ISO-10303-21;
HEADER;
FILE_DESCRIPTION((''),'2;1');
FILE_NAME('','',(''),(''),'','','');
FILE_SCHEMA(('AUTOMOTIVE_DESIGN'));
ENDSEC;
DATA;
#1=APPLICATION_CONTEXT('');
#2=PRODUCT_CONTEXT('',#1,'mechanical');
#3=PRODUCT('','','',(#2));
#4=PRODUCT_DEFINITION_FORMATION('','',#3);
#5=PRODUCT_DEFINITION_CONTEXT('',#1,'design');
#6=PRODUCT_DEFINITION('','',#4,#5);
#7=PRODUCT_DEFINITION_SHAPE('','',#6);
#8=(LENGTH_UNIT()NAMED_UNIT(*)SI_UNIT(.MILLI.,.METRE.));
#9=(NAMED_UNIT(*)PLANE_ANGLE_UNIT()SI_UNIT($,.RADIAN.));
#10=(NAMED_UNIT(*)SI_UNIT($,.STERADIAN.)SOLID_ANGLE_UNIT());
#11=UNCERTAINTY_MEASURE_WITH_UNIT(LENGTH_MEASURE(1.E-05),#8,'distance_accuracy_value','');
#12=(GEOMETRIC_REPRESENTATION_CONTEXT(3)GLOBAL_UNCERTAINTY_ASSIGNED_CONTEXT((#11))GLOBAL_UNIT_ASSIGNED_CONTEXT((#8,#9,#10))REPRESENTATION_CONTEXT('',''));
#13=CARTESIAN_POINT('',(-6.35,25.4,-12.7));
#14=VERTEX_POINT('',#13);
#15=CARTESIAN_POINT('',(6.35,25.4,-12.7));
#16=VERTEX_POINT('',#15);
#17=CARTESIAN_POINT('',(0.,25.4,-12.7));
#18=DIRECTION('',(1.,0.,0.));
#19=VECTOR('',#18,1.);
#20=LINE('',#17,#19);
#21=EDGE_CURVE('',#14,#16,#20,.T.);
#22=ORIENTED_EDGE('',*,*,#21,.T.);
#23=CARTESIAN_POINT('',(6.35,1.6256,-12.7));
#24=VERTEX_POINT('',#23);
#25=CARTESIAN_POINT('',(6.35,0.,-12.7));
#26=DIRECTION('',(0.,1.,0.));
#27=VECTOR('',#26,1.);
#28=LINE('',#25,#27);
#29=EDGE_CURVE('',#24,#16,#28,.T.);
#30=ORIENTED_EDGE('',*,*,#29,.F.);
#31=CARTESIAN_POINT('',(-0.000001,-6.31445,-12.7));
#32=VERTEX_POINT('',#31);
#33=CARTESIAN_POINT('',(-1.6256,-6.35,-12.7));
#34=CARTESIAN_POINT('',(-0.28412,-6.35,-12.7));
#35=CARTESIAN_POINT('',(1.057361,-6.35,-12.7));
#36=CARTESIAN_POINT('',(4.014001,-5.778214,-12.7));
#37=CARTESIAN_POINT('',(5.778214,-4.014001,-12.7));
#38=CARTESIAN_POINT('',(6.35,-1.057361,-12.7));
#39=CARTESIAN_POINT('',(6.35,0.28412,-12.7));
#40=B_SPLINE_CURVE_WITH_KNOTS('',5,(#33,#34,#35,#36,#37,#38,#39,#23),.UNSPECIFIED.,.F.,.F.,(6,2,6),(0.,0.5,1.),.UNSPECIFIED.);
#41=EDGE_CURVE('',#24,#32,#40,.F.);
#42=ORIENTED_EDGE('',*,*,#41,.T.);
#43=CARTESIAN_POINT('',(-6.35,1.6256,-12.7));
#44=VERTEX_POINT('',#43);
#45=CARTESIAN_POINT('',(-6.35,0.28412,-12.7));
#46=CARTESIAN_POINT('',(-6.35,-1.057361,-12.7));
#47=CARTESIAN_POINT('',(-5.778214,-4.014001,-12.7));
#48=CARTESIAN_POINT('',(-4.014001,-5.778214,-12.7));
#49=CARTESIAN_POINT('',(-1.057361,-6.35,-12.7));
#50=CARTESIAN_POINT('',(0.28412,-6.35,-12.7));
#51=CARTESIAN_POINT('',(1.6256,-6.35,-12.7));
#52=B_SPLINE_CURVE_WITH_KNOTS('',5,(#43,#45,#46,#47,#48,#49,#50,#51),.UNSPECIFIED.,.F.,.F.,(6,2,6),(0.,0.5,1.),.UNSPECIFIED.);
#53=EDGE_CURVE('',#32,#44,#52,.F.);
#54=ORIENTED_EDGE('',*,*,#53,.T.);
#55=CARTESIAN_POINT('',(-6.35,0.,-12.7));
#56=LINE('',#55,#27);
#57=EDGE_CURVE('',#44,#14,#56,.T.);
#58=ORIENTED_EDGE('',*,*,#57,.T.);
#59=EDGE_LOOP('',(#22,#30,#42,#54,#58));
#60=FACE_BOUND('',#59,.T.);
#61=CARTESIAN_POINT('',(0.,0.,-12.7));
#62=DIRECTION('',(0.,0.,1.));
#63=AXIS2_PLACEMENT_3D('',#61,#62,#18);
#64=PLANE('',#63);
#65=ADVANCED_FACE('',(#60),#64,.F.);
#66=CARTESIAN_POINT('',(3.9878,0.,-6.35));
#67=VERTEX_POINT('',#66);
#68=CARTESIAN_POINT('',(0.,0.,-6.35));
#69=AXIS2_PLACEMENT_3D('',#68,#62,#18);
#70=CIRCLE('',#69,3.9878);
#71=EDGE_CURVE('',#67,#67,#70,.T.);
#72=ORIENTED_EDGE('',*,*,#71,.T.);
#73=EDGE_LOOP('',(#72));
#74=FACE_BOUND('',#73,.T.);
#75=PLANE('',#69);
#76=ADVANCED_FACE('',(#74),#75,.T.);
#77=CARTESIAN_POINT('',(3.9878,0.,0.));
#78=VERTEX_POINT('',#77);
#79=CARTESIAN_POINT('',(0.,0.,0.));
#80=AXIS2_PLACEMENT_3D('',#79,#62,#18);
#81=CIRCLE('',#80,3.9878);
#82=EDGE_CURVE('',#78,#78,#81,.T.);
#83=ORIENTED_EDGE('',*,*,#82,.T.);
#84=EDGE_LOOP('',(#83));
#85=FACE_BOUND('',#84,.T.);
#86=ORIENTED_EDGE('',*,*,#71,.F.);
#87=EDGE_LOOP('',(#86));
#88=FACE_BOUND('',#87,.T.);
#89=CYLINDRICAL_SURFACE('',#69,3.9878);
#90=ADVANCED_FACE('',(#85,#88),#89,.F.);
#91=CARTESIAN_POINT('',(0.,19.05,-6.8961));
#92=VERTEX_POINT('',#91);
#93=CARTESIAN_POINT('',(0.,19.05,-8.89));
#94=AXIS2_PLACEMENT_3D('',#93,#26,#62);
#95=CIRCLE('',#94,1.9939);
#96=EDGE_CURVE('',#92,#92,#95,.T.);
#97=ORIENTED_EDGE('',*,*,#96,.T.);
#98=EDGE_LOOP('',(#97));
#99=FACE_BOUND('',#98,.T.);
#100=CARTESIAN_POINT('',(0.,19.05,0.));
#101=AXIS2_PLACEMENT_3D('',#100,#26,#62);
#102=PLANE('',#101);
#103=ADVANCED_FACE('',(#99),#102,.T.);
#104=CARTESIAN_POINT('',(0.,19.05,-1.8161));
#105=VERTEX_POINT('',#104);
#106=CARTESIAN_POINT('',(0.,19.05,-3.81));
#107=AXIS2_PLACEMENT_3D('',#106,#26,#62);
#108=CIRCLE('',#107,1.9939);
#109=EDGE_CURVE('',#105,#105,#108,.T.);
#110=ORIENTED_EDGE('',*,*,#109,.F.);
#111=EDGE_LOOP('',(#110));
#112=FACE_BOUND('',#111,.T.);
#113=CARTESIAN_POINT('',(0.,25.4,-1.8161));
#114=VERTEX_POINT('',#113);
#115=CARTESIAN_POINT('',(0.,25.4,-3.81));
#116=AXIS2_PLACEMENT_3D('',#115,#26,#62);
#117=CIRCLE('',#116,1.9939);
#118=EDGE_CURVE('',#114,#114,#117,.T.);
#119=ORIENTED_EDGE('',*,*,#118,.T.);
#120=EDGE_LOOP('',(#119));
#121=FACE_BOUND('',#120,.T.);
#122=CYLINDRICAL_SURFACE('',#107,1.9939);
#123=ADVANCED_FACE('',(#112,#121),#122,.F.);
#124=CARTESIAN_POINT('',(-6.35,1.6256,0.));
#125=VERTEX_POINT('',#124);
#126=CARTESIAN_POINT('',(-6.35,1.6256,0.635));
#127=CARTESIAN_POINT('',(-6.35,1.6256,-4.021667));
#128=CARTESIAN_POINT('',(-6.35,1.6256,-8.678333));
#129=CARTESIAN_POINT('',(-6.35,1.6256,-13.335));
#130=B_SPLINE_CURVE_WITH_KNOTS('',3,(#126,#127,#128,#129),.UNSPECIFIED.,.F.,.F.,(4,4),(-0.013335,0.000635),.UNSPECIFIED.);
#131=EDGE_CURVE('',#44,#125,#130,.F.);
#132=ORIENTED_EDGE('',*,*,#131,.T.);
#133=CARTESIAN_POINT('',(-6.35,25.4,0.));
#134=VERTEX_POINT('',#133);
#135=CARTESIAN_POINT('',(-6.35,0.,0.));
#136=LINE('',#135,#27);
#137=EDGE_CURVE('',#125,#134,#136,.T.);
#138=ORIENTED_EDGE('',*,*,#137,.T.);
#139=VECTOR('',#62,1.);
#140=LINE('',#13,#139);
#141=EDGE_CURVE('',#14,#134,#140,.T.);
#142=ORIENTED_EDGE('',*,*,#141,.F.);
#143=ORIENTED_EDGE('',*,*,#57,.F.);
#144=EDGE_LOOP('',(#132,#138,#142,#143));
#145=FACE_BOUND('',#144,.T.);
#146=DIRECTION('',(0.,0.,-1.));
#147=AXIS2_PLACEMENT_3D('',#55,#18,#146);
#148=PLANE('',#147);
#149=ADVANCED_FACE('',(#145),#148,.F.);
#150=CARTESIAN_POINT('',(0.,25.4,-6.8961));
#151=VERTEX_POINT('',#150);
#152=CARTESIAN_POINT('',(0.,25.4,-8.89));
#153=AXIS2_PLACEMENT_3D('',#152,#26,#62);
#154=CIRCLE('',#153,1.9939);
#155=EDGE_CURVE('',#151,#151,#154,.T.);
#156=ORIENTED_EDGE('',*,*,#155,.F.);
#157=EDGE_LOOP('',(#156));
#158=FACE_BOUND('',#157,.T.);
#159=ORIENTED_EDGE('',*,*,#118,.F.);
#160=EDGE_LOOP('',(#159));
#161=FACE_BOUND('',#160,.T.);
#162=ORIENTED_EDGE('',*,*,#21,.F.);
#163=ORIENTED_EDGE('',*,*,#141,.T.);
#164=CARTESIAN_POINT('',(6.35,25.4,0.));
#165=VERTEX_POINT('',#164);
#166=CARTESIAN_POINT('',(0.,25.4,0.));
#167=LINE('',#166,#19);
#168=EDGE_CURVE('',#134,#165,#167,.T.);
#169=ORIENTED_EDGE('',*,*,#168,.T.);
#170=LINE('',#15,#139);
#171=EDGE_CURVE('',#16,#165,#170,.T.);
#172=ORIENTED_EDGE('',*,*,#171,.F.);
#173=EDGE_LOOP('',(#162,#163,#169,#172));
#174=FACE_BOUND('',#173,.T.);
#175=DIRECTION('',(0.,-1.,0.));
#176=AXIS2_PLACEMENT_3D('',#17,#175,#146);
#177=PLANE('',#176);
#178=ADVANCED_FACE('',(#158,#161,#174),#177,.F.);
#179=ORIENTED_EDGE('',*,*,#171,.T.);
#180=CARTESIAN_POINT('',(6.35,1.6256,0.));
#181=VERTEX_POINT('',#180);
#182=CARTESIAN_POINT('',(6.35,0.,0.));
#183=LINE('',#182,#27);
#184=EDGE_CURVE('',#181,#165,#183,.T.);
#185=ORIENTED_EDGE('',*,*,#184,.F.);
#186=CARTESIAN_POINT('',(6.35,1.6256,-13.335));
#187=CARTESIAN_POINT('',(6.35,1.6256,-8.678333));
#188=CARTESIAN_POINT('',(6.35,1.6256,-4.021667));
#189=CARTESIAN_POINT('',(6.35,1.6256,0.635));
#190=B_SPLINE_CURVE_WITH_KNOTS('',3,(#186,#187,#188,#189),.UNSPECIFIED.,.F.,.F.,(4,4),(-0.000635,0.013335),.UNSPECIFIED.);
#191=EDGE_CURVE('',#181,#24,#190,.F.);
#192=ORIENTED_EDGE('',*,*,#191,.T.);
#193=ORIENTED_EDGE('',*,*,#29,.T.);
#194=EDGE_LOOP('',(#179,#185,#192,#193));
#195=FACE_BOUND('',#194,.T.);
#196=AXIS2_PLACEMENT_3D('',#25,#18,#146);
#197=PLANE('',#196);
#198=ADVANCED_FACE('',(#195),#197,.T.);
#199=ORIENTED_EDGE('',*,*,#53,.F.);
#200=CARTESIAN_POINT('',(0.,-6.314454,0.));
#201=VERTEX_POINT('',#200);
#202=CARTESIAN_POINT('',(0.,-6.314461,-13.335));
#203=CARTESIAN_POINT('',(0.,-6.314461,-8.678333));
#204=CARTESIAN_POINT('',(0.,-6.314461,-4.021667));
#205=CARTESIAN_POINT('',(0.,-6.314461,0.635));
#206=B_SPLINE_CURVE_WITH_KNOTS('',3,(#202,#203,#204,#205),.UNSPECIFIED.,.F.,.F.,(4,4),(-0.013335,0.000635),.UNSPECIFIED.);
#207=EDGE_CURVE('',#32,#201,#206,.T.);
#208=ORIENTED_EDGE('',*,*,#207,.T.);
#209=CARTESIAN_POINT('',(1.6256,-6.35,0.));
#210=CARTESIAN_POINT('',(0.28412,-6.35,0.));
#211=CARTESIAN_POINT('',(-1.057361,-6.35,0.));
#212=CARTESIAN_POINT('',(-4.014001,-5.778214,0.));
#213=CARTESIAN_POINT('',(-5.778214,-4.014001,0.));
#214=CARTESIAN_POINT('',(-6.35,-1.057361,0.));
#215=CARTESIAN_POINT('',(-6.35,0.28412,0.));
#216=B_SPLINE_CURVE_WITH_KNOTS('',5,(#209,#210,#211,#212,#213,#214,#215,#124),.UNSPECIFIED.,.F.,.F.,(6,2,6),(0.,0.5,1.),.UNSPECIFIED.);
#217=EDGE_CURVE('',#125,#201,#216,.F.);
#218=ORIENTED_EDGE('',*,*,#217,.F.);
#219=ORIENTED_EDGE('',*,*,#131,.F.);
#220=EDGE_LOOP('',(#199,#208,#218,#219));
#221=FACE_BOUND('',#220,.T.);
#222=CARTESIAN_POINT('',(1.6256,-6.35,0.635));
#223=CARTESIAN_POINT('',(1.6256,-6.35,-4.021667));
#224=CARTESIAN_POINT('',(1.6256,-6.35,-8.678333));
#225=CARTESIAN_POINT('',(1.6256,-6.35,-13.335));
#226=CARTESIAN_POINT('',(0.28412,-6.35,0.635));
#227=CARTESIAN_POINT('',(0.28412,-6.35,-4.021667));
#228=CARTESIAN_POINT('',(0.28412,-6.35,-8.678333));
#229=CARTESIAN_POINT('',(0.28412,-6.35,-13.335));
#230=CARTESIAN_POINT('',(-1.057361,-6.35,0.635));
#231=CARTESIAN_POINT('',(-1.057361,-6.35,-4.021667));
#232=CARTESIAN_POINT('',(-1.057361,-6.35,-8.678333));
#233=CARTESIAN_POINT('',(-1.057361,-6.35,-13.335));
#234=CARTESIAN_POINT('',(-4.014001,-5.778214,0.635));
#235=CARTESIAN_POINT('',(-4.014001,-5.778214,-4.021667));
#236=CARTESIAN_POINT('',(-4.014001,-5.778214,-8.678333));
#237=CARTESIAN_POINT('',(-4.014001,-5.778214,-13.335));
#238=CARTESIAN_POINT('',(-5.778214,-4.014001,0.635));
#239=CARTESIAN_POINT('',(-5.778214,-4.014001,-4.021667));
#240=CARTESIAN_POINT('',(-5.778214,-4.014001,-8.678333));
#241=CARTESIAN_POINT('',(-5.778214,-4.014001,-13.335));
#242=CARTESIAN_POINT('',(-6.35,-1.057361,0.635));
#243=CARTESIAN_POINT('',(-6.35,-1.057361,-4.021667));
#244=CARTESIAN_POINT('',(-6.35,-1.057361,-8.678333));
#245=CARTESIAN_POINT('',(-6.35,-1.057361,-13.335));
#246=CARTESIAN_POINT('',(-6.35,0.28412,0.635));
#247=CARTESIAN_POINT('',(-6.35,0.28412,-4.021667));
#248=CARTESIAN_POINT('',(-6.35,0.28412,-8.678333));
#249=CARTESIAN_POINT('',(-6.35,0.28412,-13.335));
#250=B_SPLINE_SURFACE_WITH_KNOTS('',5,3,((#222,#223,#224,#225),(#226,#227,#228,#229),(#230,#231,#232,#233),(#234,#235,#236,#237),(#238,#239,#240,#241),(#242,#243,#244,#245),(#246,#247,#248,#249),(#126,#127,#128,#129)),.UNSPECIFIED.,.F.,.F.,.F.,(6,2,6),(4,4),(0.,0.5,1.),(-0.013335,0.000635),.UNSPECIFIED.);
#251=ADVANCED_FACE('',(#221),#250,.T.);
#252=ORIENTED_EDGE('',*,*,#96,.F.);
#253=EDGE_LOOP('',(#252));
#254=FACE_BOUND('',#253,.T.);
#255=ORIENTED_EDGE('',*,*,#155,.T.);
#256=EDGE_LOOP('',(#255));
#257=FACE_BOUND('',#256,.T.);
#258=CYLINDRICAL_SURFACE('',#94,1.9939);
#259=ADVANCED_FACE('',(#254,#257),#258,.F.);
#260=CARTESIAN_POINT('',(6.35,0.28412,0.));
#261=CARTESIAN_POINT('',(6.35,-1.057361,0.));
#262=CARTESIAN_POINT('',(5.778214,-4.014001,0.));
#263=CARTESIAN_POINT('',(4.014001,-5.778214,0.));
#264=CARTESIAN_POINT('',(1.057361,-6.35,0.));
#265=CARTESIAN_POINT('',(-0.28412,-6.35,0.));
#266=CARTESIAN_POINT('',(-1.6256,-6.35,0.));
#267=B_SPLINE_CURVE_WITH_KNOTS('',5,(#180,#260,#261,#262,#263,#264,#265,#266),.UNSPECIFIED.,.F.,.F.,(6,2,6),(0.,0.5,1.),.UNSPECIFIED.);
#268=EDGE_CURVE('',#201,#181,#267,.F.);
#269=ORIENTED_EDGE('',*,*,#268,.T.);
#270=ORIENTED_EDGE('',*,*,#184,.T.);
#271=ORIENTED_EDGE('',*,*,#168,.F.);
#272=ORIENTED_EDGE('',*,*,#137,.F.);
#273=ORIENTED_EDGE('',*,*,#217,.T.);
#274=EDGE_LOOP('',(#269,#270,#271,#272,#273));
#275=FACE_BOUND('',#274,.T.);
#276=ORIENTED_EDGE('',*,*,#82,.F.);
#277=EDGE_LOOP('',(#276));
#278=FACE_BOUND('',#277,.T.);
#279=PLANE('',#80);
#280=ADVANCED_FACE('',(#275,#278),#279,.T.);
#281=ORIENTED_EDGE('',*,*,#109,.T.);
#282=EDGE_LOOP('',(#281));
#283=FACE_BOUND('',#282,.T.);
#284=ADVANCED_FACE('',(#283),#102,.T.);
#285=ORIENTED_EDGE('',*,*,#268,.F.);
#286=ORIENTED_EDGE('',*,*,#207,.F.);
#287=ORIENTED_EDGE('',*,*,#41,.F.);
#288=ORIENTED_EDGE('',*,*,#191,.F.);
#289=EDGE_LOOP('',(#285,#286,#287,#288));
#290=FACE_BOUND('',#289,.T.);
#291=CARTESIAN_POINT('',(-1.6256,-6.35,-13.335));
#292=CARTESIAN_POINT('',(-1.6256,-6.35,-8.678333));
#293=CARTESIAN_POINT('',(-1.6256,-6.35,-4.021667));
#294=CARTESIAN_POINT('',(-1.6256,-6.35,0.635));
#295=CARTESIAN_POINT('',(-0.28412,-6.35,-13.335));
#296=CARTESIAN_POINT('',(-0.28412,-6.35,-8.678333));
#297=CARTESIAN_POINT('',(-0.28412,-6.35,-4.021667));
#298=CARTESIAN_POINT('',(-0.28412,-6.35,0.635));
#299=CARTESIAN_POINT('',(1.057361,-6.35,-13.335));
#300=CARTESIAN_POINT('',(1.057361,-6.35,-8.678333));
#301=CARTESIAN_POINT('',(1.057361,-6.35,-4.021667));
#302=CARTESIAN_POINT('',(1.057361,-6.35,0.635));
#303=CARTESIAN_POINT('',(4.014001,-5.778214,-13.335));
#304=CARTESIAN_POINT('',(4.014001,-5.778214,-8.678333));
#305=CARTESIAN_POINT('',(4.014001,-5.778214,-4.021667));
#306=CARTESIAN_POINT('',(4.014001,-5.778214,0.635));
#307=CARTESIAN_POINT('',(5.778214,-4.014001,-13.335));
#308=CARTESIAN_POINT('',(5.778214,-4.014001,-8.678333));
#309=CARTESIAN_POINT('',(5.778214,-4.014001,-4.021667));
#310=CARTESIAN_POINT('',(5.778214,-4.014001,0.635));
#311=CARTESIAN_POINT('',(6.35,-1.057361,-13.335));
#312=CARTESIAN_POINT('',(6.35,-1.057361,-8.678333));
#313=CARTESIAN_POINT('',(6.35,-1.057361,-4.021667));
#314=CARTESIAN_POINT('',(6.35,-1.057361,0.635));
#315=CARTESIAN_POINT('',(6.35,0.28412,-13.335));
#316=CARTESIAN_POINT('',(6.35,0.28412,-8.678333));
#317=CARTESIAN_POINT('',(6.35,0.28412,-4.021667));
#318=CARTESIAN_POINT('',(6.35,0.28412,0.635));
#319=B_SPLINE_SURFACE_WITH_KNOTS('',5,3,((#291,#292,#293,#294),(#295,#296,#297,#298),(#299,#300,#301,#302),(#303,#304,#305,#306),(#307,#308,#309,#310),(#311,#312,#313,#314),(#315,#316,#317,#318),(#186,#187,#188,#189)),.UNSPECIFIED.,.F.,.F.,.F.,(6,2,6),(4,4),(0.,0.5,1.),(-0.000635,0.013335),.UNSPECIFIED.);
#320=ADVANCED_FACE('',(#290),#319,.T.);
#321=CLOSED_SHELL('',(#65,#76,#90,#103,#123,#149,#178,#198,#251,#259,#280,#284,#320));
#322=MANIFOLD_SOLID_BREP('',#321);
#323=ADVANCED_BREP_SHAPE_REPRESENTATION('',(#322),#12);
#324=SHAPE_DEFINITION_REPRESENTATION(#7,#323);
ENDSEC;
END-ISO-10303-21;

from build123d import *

# Parameters (mm, degrees)
SKETCH1_W           = 12.7
SKETCH1_H           = 19.05
SKETCH1_H_2         = 12.7
SKETCH1_R           = 3.9878
BOSS_EXTRUDE1_DEPTH = 12.7
FILLET1_SIZE        = 7.9756
CUT_EXTRUDE2_DEPTH  = 6.35
SKETCH1_3_R         = 3.9878
CUT_EXTRUDE3_DEPTH  = 6.35


with BuildPart() as part:
    # Sketch1 → Boss-Extrude1 (new body)
    # profile 1 of 3: a face of its own
    with BuildSketch(Plane.XY):
        with Locations((0, 15.875)):
            Rectangle(SKETCH1_W, SKETCH1_H)
    # profile 2 of 3: a face of its own
    with BuildSketch(Plane.XY):
        Rectangle(SKETCH1_W, SKETCH1_H_2)
        Circle(SKETCH1_R, mode=Mode.SUBTRACT)
    # profile 3 of 3: a face of its own
    with BuildSketch(Plane.XY):
        Circle(SKETCH1_R)
    extrude(amount=-BOSS_EXTRUDE1_DEPTH)

    # Fillet1
    # a fillet whose section is not a circle: 7.9756 mm, written as the material it takes off along each edge
    with BuildSketch(Plane(origin=(-6.35, -6.35, 19.939), x_dir=(1, 0, 0), z_dir=(0, 0, -1)), Plane(origin=(6.35, -6.35, 19.939), x_dir=(0, 1, 0), z_dir=(0, 0, -1))) as fillet1_piece_1:
        with BuildLine():
            add(Edge.make_bspline([(FILLET1_SIZE, 0), (FILLET1_SIZE * 0.831801948466, 0), (FILLET1_SIZE * 0.663603896932, 0), (FILLET1_SIZE * 0.292893218813, -FILLET1_SIZE * 0.0716919198361), (FILLET1_SIZE * 0.0716919198361, -FILLET1_SIZE * 0.292893218813), (0, -FILLET1_SIZE * 0.663603896932), (0, -FILLET1_SIZE * 0.831801948466), (0, -FILLET1_SIZE)], knots=[0, 0, 0, 0, 0, 0, 0.5, 0.5, 1, 1, 1, 1, 1, 1], degree=5))
            Line((0, -FILLET1_SIZE), (0, 0))
            Line((0, 0), (FILLET1_SIZE, 0))
        make_face()
    extrude(amount=52.578, mode=Mode.SUBTRACT)

    # Sketch3 → Cut-Extrude2 (cut)
    with BuildSketch(Plane(origin=(0, 25.4, 0), x_dir=(1, 0, 0), z_dir=(0, 1, 0))):
        with BuildLine():
            ThreePointArc((1.9939, 8.89), (1.409900211, 10.299900211), (0, 10.8839))
            Line((0, 10.8839), (0, 8.89))
            Line((0, 8.89), (1.9939, 8.89))
        make_face()
        with BuildLine():
            Line((0, 8.89), (0, 10.8839))
            ThreePointArc((0, 10.8839), (-1.409900211, 10.299900211), (-1.9939, 8.89))
            Line((-1.9939, 8.89), (0, 8.89))
        make_face()
        with BuildLine():
            Line((1.9939, 8.89), (0, 8.89))
            Line((0, 8.89), (0, 6.8961))
            ThreePointArc((0, 6.8961), (1.409900211, 7.480099789), (1.9939, 8.89))
        make_face()
        with BuildLine():
            Line((0, 6.8961), (0, 8.89))
            Line((0, 8.89), (-1.9939, 8.89))
            ThreePointArc((-1.9939, 8.89), (-1.409900211, 7.480099789), (0, 6.8961))
        make_face()
        with BuildLine():
            ThreePointArc((1.9939, 3.81), (1.409900211, 5.219900211), (0, 5.8039))
            Line((0, 5.8039), (0, 3.81))
            Line((0, 3.81), (1.9939, 3.81))
        make_face()
        with BuildLine():
            Line((0, 3.81), (0, 5.8039))
            ThreePointArc((0, 5.8039), (-1.409900211, 5.219900211), (-1.9939, 3.81))
            Line((-1.9939, 3.81), (0, 3.81))
        make_face()
        with BuildLine():
            ThreePointArc((0, 1.8161), (1.409900211, 2.400099789), (1.9939, 3.81))
            Line((1.9939, 3.81), (0, 3.81))
            Line((0, 3.81), (0, 1.8161))
        make_face()
        with BuildLine():
            Line((0, 3.81), (-1.9939, 3.81))
            ThreePointArc((-1.9939, 3.81), (-1.409900211, 2.400099789), (0, 1.8161))
            Line((0, 1.8161), (0, 3.81))
        make_face()
    extrude(amount=-CUT_EXTRUDE2_DEPTH, mode=Mode.SUBTRACT)

    # Sketch1<3> → Cut-Extrude3 (cut)
    with BuildSketch(Plane.XY):
        Circle(SKETCH1_3_R)
    extrude(amount=-CUT_EXTRUDE3_DEPTH, mode=Mode.SUBTRACT)


solid = part.part
